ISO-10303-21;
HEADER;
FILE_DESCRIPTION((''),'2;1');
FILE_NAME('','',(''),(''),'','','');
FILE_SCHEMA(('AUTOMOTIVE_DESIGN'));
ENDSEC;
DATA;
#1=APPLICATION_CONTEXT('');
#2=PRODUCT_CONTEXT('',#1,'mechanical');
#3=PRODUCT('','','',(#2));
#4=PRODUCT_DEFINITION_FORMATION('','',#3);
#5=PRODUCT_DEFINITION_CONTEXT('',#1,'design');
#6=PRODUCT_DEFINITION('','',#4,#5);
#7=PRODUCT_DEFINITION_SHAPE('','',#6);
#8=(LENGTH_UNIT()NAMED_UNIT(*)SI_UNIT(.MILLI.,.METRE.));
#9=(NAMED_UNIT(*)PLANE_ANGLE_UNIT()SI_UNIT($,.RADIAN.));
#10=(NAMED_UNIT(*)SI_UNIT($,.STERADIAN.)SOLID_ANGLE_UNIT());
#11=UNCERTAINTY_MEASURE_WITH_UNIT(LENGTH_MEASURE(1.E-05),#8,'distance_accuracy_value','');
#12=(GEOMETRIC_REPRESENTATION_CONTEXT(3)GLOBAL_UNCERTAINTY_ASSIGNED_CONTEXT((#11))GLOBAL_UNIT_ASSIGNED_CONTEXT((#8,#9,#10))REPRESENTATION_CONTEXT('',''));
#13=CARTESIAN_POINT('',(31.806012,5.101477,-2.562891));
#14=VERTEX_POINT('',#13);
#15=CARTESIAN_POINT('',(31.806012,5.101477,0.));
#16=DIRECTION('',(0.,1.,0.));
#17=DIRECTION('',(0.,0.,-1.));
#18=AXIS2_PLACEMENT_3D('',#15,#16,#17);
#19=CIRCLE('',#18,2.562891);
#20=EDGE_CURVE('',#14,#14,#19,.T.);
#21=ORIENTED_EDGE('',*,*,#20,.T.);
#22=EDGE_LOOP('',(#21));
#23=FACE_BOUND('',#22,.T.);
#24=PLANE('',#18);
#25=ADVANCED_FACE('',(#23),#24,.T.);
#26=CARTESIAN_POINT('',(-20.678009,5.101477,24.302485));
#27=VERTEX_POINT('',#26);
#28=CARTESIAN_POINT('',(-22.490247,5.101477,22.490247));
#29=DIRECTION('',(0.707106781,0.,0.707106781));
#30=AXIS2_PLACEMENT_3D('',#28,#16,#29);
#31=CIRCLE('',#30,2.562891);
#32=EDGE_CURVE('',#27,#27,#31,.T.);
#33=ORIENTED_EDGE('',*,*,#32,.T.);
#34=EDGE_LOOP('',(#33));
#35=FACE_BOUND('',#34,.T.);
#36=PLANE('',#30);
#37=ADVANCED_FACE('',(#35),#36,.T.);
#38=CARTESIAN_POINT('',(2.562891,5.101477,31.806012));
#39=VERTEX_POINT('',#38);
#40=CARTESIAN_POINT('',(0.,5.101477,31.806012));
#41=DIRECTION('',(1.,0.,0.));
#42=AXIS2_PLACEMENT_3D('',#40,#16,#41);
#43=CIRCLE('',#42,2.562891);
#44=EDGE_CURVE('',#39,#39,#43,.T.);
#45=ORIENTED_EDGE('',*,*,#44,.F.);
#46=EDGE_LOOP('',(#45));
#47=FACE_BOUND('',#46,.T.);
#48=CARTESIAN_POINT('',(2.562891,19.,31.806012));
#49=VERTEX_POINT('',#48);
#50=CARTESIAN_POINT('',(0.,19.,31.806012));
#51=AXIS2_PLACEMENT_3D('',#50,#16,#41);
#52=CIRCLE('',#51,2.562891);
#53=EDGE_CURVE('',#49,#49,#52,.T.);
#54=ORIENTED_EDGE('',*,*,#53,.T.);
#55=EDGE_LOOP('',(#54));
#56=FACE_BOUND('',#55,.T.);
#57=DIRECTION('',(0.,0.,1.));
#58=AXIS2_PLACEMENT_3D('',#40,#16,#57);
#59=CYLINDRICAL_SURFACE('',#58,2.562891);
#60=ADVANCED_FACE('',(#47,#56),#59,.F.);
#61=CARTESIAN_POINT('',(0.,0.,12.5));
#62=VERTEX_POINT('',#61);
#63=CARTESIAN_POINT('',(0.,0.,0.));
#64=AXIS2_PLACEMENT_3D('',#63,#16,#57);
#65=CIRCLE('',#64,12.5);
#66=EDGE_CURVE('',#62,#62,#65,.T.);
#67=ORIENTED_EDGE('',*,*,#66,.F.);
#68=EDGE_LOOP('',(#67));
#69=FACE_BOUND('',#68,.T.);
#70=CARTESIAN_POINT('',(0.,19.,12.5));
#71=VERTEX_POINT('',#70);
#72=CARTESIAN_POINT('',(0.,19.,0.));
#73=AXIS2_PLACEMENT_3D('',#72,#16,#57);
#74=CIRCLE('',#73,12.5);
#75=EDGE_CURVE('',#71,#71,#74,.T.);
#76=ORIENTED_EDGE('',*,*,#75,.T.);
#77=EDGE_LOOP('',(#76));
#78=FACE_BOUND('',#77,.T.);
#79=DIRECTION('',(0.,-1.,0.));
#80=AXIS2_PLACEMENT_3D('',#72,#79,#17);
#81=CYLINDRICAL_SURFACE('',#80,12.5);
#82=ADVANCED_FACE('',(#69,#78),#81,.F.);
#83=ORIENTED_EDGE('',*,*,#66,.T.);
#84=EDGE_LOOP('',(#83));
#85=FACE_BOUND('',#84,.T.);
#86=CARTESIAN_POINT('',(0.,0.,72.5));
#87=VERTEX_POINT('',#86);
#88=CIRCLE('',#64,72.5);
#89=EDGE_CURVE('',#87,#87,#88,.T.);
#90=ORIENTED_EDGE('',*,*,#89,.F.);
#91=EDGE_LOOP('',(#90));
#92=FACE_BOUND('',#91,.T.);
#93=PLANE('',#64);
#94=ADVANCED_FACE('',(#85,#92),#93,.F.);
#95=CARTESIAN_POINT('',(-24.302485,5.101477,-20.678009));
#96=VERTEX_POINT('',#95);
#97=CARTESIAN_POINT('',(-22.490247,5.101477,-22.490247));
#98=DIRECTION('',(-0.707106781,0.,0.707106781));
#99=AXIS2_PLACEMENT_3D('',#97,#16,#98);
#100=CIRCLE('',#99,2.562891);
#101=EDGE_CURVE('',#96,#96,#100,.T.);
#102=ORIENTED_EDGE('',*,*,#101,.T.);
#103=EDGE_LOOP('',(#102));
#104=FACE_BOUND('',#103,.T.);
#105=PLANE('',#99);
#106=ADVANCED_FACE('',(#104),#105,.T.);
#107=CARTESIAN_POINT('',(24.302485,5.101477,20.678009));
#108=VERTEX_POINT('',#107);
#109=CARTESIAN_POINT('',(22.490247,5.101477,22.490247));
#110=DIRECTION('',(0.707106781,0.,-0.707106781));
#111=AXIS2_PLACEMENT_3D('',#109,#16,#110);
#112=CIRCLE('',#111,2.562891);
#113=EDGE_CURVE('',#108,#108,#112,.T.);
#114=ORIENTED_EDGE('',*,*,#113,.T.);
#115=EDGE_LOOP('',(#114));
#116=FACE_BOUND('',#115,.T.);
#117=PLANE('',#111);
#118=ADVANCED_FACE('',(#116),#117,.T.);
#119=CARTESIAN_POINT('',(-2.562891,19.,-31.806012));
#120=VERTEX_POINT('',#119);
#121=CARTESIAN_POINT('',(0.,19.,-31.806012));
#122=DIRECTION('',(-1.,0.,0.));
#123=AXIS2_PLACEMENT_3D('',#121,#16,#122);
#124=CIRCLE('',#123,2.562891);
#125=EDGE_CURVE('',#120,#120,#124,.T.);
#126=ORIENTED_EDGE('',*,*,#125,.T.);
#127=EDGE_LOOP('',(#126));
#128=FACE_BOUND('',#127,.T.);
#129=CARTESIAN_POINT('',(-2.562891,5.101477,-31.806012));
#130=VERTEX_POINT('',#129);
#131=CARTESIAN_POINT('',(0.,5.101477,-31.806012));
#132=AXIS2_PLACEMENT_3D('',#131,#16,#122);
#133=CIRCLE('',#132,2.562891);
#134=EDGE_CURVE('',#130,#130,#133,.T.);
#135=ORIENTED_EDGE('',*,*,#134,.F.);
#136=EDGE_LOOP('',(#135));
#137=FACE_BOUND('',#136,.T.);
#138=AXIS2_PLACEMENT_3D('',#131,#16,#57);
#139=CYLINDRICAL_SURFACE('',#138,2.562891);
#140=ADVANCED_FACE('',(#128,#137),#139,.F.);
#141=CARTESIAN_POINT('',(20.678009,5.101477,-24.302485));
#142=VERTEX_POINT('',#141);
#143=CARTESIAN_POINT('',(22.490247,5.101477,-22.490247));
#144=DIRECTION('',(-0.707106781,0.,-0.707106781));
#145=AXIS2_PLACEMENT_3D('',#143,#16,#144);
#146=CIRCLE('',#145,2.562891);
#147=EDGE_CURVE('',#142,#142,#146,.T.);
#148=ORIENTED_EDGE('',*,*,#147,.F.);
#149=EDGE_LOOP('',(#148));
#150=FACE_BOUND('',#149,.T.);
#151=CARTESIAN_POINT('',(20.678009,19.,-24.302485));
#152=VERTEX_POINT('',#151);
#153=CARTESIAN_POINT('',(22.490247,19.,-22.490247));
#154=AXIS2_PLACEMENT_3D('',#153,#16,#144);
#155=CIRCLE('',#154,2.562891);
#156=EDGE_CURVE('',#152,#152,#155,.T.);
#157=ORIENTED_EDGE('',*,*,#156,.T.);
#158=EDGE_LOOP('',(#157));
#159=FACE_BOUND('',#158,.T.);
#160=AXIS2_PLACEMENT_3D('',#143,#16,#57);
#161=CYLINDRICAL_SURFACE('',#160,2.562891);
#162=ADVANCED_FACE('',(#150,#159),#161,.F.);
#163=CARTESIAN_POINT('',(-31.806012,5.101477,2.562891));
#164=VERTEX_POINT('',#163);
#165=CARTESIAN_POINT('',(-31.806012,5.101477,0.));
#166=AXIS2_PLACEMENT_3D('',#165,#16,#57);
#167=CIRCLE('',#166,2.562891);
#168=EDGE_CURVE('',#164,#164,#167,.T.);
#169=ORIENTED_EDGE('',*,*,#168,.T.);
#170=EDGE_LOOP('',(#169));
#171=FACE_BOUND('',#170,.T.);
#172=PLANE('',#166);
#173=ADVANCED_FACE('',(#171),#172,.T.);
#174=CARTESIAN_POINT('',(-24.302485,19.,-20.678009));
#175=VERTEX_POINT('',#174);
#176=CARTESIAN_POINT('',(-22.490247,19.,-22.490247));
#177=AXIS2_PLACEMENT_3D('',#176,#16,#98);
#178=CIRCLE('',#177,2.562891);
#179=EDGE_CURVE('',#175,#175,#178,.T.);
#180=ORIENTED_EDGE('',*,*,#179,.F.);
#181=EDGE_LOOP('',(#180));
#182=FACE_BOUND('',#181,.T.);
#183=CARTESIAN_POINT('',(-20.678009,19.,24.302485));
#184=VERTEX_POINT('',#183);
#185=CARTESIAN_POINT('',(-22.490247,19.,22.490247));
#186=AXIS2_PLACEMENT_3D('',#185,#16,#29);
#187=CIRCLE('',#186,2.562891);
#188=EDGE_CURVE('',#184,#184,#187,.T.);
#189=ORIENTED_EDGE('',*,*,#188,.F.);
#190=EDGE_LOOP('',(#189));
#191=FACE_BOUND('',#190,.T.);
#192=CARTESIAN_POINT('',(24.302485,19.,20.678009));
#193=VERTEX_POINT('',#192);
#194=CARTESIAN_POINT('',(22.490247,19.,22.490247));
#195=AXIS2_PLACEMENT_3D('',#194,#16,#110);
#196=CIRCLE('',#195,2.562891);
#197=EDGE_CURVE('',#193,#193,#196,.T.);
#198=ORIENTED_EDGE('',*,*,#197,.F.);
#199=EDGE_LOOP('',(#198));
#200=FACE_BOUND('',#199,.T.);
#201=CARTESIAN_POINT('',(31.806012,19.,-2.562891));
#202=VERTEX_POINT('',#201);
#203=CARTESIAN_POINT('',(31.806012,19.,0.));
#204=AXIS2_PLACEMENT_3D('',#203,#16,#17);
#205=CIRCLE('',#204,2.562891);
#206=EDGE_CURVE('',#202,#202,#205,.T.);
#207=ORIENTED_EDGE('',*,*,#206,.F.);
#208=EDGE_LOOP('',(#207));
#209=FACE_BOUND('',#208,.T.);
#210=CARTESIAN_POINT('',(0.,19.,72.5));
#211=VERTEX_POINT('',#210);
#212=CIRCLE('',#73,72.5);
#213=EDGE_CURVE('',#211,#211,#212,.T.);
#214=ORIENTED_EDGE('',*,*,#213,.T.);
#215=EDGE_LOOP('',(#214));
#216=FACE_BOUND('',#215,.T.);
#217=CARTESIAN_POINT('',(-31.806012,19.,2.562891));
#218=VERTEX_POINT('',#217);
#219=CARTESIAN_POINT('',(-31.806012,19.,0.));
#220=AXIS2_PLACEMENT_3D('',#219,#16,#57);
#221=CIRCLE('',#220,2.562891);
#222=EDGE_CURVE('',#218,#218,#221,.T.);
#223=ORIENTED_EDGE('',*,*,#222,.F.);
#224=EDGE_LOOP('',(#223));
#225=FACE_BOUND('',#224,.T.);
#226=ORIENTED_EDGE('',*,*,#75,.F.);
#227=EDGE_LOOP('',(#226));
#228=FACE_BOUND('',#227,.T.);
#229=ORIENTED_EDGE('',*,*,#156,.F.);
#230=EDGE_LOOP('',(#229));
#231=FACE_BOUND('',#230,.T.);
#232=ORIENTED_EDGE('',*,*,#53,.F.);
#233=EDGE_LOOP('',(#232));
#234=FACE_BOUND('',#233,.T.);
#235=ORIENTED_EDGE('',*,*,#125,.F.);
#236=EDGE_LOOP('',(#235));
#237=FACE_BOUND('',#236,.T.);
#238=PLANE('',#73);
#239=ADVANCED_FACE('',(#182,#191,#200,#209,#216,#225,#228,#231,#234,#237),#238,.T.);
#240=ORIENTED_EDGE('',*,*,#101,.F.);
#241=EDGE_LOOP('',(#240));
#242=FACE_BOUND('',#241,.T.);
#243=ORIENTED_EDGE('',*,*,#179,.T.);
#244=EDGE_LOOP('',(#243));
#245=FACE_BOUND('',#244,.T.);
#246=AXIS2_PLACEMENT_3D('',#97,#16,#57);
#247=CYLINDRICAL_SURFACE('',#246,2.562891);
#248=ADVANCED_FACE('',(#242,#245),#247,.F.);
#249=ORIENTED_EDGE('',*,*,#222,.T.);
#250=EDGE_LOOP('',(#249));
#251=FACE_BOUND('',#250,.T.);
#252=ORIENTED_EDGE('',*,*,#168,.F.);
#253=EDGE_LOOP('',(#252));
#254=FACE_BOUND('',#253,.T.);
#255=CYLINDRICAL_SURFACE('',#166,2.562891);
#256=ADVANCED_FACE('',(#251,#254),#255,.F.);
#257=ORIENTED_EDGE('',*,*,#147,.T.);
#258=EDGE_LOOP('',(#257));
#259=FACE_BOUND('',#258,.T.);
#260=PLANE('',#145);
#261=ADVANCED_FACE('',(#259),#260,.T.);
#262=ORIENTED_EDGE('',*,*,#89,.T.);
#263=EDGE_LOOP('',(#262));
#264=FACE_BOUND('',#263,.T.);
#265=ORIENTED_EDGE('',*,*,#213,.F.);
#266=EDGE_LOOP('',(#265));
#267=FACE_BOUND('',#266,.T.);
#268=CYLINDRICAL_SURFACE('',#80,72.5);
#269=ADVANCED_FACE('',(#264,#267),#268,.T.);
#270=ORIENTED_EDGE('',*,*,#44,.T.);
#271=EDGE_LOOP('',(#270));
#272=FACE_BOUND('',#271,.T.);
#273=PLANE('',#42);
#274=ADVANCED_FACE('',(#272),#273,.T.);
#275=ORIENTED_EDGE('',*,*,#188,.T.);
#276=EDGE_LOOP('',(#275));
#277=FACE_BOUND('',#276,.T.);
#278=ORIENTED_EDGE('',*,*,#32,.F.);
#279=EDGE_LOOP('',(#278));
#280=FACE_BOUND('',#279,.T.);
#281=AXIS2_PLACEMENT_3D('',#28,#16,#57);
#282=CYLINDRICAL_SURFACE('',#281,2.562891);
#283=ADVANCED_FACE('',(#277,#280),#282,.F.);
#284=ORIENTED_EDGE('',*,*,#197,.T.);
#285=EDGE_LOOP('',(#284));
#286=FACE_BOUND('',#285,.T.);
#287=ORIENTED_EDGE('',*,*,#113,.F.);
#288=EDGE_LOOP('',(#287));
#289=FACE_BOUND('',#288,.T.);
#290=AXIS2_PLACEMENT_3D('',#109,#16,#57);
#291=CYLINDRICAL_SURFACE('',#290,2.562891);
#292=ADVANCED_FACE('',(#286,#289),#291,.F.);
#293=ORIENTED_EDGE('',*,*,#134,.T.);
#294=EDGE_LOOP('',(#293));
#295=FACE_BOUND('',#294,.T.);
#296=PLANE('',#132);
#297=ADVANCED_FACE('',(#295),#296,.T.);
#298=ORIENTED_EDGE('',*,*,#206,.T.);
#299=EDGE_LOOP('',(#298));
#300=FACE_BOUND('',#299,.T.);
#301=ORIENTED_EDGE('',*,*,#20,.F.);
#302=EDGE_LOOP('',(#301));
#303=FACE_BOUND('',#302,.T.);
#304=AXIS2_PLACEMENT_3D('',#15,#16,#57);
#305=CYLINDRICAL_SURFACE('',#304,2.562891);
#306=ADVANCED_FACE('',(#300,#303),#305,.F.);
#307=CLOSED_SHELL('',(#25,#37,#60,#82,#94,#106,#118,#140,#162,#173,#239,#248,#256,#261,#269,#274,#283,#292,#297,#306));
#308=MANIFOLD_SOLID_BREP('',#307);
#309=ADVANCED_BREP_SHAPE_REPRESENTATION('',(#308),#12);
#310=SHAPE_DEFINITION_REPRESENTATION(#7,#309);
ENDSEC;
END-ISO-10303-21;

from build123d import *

# Parameters (mm, degrees)
SKETCH1_R           = 72.5
BOSS_EXTRUDE1_DEPTH = 19
SKETCH2_R           = 12.5
CUT_EXTRUDE1_DEPTH  = 105.276075876
SKETCH3_R           = 2.562891384
CUT_EXTRUDE2_DEPTH  = 13.898522817
CIRPATTERN1_COUNT   = 8


with BuildPart() as part:
    # Sketch1 → Boss-Extrude1 (new body)
    with BuildSketch(Plane(origin=(0, 0, 0), x_dir=(1, 0, 0), z_dir=(0, 1, 0))):
        Circle(SKETCH1_R)
    extrude(amount=BOSS_EXTRUDE1_DEPTH)

    # Sketch2 → Cut-Extrude1 (cut, through all)
    with BuildSketch(Plane(origin=(0, 0, 0), x_dir=(1, 0, 0), z_dir=(0, 1, 0))):
        Circle(SKETCH2_R)
    extrude(amount=CUT_EXTRUDE1_DEPTH, mode=Mode.SUBTRACT)

    # Sketch3 → Cut-Extrude2 (cut)
    with BuildSketch(Plane(origin=(0, 19, 0), x_dir=(1, 0, 0), z_dir=(0, 1, 0))):
        with Locations((-31.806011933, 0)):
            Circle(SKETCH3_R)
    cut_extrude2 = extrude(amount=-CUT_EXTRUDE2_DEPTH, mode=Mode.SUBTRACT)

    # CirPattern1: Cut-Extrude2 ×8 about axis
    cirpattern1_axis = Axis((0, 0, 0), (0, 1, 0))
    for i in range(1, CIRPATTERN1_COUNT):
        add(cut_extrude2.rotate(cirpattern1_axis, i * 360 / CIRPATTERN1_COUNT), mode=Mode.SUBTRACT)


solid = part.part
